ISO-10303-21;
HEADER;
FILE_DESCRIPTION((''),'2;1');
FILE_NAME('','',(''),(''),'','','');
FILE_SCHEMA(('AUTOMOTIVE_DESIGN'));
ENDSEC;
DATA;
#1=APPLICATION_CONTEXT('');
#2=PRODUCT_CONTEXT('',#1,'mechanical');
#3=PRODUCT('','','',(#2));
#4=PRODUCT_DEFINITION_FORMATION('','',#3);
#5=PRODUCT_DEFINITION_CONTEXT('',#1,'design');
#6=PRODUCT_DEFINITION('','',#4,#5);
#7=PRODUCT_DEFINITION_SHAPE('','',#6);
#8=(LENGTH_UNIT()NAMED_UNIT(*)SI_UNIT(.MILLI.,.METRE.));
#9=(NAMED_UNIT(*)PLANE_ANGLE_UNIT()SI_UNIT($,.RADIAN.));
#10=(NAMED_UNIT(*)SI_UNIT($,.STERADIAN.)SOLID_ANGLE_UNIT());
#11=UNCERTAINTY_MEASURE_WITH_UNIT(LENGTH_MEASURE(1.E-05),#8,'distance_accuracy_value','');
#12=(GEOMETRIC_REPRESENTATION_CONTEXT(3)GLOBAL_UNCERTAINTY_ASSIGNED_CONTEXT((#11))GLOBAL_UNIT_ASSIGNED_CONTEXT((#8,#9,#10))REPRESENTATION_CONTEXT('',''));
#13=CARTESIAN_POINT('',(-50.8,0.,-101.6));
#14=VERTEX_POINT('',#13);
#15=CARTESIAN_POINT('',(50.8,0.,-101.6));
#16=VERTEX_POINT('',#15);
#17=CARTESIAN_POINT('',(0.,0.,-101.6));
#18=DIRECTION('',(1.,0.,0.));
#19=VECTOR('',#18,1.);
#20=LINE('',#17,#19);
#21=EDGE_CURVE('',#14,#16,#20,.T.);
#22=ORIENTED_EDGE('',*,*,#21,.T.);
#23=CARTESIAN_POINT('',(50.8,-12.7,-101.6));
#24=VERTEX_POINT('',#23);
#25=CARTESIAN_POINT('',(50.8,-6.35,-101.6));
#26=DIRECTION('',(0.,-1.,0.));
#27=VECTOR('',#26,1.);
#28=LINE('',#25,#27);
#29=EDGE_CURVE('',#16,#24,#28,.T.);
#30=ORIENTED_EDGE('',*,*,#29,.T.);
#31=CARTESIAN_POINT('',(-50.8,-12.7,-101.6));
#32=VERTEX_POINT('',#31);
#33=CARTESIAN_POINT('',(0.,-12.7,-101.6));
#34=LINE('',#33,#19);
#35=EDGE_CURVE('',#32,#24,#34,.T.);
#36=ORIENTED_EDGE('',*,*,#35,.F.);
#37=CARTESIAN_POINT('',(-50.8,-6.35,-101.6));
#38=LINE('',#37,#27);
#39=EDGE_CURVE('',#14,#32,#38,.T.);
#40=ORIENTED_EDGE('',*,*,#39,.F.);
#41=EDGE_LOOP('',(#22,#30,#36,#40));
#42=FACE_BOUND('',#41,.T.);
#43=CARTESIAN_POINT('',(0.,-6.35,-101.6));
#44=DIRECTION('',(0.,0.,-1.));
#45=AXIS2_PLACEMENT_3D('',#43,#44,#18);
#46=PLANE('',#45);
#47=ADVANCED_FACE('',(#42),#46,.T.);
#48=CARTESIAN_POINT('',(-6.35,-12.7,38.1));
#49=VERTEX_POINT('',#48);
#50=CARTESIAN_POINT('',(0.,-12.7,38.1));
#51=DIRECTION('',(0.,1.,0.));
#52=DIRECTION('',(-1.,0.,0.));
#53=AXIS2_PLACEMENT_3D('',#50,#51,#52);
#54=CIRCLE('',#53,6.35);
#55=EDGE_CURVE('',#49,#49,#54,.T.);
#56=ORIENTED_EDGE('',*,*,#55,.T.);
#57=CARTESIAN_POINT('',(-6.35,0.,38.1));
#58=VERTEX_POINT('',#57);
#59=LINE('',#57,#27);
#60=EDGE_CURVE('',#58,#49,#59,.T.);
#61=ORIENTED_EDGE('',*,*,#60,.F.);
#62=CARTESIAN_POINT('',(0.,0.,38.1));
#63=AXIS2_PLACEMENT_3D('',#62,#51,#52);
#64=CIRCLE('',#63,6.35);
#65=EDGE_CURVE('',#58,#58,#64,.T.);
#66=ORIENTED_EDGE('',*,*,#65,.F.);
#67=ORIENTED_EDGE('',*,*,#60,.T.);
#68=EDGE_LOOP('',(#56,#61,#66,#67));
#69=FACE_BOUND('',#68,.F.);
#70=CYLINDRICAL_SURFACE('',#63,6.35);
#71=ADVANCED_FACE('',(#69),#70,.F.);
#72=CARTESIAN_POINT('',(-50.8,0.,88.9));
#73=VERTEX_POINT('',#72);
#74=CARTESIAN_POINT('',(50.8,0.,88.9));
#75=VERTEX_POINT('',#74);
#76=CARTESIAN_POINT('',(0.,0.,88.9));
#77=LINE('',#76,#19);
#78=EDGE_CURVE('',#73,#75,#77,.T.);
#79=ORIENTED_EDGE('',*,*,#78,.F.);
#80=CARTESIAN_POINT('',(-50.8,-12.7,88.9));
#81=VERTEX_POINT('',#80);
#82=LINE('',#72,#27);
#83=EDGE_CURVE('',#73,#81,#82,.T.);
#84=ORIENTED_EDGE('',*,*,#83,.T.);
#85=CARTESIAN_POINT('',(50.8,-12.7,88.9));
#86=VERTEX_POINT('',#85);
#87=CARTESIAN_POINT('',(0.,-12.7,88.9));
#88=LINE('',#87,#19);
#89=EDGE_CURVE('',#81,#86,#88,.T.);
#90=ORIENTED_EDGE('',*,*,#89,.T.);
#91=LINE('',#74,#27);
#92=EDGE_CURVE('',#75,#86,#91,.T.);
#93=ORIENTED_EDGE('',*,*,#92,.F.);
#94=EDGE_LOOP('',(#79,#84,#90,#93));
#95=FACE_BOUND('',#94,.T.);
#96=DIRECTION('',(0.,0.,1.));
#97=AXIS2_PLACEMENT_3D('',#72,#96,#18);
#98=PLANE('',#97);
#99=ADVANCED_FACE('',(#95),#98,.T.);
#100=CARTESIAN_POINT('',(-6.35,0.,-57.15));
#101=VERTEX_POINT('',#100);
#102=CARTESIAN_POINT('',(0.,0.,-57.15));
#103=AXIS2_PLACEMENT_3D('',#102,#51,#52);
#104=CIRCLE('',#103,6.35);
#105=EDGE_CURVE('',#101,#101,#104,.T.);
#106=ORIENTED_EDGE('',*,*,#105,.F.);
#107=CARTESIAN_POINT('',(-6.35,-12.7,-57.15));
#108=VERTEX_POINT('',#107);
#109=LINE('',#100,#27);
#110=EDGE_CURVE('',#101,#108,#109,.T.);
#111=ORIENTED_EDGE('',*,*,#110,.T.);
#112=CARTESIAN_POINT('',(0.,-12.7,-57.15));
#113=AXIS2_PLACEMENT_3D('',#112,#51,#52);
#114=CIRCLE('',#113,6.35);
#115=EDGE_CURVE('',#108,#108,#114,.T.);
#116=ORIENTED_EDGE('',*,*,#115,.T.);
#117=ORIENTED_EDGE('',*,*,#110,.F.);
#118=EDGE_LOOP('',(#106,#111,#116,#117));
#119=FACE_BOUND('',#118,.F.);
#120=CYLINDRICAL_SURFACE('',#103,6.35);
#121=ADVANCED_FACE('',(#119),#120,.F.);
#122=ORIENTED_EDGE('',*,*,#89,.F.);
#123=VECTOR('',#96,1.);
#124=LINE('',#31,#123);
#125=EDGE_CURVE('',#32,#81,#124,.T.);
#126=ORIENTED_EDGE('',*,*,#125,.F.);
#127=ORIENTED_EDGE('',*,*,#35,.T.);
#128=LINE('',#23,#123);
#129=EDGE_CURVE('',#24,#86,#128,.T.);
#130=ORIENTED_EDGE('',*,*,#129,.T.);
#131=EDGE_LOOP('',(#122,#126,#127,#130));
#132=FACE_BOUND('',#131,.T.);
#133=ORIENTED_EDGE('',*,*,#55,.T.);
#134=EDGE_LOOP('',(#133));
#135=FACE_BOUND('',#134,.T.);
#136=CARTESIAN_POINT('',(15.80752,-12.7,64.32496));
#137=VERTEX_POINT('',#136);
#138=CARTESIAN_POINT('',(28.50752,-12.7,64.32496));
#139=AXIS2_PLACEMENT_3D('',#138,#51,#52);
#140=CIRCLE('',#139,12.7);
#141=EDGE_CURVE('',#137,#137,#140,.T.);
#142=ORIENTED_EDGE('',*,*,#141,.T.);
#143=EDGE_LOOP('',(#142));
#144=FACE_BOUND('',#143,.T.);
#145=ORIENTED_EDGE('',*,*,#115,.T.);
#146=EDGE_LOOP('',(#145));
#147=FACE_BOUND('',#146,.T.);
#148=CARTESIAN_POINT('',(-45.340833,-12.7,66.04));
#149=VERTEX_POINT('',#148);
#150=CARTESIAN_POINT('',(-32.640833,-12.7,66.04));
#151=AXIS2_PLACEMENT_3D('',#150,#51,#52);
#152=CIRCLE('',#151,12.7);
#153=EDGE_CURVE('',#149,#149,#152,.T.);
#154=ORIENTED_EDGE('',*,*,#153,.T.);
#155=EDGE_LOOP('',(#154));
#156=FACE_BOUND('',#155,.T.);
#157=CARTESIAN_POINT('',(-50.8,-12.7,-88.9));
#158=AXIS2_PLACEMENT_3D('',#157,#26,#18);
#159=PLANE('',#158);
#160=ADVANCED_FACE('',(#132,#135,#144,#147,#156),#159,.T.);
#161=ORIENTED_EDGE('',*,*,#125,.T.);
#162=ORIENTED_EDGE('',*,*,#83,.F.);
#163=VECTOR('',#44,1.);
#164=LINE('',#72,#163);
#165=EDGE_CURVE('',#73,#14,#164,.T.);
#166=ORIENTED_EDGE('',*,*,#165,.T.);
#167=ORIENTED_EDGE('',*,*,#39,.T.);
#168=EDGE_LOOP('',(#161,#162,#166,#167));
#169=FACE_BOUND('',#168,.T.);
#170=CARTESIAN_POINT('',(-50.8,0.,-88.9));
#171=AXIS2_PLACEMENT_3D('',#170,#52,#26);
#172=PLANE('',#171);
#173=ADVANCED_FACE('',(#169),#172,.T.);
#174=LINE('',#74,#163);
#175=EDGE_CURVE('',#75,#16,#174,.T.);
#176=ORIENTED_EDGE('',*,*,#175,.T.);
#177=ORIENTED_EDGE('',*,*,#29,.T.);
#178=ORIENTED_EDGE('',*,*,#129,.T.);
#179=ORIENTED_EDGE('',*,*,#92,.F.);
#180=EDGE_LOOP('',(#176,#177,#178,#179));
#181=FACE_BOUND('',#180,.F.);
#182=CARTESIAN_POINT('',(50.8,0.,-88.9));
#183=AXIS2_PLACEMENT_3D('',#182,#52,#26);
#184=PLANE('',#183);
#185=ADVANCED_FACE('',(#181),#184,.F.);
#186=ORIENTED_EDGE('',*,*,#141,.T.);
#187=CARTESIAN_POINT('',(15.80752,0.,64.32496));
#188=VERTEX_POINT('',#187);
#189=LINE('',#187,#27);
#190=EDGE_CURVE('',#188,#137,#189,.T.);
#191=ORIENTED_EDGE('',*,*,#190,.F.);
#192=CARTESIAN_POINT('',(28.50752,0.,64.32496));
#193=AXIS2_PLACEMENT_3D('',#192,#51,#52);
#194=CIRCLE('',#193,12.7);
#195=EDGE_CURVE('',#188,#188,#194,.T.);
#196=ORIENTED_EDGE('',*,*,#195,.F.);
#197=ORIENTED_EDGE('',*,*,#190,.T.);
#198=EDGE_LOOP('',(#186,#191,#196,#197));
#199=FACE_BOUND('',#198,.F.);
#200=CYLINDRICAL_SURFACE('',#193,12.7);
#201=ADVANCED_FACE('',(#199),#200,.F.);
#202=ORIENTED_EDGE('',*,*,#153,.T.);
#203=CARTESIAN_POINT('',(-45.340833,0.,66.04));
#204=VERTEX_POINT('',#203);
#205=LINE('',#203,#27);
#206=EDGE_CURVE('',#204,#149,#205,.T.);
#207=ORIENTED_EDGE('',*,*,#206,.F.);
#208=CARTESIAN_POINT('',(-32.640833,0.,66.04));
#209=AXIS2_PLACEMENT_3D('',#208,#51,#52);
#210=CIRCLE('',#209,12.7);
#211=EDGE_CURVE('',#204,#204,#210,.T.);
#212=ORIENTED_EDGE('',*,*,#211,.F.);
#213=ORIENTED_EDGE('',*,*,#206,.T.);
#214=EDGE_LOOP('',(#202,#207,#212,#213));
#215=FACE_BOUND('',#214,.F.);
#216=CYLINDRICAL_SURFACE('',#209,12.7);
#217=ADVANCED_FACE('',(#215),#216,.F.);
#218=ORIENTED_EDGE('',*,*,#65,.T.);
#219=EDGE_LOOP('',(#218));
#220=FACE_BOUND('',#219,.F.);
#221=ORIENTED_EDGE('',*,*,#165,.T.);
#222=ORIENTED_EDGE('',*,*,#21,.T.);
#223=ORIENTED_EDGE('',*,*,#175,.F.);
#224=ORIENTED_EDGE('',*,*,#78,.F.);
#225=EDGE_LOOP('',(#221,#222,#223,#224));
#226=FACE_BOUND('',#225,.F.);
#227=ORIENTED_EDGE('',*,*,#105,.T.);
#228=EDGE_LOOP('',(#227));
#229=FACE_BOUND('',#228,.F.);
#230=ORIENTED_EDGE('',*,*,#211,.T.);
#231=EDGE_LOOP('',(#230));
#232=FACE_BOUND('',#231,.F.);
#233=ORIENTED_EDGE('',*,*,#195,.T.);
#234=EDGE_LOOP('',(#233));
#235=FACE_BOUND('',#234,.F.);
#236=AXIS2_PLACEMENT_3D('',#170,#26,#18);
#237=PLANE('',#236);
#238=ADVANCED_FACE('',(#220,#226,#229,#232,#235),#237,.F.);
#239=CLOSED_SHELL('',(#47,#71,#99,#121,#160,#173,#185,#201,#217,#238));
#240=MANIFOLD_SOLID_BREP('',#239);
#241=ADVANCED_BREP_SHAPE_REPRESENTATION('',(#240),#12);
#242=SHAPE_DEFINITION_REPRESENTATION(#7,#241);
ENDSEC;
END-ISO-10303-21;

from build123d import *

# Parameters (mm, degrees)
F0_W     = 101.6
F0_H     = 177.8
F1_DEPTH = 12.7
F2_W     = 101.6
F2_H     = 12.7
F3_DEPTH = 12.7
F4_R     = 12.7
F4_R_2   = 6.35
F5_DEPTH = 12.701
F6_R     = 6.35
F7_DEPTH = 12.701


# Not quite as in the source:
# - a feature names something its author has since deleted; it is built from what else it names


with BuildPart() as f1:
    # F0 (on Front) → F1 (new body)
    with BuildSketch(Plane.XZ):
        Rectangle(F0_W, F0_H)
    extrude(amount=F1_DEPTH)

    # F2 (on face) → F3 (join)
    with BuildSketch(Plane(origin=(0, 0, -88.9), x_dir=(1, 0, 0), z_dir=(0, 0, -1))):
        with Locations((0, 6.35)):
            Rectangle(F2_W, F2_H)
    extrude(amount=F3_DEPTH)

    # F4 (on face) → F5 (cut, through all)
    with BuildSketch(Plane(origin=(0, 0, 0), x_dir=(-1, 0, 0), z_dir=(0, 1, 0))):
        with Locations((-28.5075195134, 64.3249601126)):
            Circle(F4_R)
        with Locations((0, 38.1)):
            Circle(F4_R_2)
        with Locations((32.6408334076, 66.04)):
            Circle(F4_R)
    extrude(amount=-F5_DEPTH, mode=Mode.SUBTRACT)

    # F6 (on face) → F7 (cut, through all)
    with BuildSketch(Plane(origin=(0, 0, 0), x_dir=(-1, 0, 0), z_dir=(0, 1, 0))):
        with Locations((0, -57.15)):
            Circle(F6_R)
    extrude(amount=-F7_DEPTH, mode=Mode.SUBTRACT)


solid = f1.part
